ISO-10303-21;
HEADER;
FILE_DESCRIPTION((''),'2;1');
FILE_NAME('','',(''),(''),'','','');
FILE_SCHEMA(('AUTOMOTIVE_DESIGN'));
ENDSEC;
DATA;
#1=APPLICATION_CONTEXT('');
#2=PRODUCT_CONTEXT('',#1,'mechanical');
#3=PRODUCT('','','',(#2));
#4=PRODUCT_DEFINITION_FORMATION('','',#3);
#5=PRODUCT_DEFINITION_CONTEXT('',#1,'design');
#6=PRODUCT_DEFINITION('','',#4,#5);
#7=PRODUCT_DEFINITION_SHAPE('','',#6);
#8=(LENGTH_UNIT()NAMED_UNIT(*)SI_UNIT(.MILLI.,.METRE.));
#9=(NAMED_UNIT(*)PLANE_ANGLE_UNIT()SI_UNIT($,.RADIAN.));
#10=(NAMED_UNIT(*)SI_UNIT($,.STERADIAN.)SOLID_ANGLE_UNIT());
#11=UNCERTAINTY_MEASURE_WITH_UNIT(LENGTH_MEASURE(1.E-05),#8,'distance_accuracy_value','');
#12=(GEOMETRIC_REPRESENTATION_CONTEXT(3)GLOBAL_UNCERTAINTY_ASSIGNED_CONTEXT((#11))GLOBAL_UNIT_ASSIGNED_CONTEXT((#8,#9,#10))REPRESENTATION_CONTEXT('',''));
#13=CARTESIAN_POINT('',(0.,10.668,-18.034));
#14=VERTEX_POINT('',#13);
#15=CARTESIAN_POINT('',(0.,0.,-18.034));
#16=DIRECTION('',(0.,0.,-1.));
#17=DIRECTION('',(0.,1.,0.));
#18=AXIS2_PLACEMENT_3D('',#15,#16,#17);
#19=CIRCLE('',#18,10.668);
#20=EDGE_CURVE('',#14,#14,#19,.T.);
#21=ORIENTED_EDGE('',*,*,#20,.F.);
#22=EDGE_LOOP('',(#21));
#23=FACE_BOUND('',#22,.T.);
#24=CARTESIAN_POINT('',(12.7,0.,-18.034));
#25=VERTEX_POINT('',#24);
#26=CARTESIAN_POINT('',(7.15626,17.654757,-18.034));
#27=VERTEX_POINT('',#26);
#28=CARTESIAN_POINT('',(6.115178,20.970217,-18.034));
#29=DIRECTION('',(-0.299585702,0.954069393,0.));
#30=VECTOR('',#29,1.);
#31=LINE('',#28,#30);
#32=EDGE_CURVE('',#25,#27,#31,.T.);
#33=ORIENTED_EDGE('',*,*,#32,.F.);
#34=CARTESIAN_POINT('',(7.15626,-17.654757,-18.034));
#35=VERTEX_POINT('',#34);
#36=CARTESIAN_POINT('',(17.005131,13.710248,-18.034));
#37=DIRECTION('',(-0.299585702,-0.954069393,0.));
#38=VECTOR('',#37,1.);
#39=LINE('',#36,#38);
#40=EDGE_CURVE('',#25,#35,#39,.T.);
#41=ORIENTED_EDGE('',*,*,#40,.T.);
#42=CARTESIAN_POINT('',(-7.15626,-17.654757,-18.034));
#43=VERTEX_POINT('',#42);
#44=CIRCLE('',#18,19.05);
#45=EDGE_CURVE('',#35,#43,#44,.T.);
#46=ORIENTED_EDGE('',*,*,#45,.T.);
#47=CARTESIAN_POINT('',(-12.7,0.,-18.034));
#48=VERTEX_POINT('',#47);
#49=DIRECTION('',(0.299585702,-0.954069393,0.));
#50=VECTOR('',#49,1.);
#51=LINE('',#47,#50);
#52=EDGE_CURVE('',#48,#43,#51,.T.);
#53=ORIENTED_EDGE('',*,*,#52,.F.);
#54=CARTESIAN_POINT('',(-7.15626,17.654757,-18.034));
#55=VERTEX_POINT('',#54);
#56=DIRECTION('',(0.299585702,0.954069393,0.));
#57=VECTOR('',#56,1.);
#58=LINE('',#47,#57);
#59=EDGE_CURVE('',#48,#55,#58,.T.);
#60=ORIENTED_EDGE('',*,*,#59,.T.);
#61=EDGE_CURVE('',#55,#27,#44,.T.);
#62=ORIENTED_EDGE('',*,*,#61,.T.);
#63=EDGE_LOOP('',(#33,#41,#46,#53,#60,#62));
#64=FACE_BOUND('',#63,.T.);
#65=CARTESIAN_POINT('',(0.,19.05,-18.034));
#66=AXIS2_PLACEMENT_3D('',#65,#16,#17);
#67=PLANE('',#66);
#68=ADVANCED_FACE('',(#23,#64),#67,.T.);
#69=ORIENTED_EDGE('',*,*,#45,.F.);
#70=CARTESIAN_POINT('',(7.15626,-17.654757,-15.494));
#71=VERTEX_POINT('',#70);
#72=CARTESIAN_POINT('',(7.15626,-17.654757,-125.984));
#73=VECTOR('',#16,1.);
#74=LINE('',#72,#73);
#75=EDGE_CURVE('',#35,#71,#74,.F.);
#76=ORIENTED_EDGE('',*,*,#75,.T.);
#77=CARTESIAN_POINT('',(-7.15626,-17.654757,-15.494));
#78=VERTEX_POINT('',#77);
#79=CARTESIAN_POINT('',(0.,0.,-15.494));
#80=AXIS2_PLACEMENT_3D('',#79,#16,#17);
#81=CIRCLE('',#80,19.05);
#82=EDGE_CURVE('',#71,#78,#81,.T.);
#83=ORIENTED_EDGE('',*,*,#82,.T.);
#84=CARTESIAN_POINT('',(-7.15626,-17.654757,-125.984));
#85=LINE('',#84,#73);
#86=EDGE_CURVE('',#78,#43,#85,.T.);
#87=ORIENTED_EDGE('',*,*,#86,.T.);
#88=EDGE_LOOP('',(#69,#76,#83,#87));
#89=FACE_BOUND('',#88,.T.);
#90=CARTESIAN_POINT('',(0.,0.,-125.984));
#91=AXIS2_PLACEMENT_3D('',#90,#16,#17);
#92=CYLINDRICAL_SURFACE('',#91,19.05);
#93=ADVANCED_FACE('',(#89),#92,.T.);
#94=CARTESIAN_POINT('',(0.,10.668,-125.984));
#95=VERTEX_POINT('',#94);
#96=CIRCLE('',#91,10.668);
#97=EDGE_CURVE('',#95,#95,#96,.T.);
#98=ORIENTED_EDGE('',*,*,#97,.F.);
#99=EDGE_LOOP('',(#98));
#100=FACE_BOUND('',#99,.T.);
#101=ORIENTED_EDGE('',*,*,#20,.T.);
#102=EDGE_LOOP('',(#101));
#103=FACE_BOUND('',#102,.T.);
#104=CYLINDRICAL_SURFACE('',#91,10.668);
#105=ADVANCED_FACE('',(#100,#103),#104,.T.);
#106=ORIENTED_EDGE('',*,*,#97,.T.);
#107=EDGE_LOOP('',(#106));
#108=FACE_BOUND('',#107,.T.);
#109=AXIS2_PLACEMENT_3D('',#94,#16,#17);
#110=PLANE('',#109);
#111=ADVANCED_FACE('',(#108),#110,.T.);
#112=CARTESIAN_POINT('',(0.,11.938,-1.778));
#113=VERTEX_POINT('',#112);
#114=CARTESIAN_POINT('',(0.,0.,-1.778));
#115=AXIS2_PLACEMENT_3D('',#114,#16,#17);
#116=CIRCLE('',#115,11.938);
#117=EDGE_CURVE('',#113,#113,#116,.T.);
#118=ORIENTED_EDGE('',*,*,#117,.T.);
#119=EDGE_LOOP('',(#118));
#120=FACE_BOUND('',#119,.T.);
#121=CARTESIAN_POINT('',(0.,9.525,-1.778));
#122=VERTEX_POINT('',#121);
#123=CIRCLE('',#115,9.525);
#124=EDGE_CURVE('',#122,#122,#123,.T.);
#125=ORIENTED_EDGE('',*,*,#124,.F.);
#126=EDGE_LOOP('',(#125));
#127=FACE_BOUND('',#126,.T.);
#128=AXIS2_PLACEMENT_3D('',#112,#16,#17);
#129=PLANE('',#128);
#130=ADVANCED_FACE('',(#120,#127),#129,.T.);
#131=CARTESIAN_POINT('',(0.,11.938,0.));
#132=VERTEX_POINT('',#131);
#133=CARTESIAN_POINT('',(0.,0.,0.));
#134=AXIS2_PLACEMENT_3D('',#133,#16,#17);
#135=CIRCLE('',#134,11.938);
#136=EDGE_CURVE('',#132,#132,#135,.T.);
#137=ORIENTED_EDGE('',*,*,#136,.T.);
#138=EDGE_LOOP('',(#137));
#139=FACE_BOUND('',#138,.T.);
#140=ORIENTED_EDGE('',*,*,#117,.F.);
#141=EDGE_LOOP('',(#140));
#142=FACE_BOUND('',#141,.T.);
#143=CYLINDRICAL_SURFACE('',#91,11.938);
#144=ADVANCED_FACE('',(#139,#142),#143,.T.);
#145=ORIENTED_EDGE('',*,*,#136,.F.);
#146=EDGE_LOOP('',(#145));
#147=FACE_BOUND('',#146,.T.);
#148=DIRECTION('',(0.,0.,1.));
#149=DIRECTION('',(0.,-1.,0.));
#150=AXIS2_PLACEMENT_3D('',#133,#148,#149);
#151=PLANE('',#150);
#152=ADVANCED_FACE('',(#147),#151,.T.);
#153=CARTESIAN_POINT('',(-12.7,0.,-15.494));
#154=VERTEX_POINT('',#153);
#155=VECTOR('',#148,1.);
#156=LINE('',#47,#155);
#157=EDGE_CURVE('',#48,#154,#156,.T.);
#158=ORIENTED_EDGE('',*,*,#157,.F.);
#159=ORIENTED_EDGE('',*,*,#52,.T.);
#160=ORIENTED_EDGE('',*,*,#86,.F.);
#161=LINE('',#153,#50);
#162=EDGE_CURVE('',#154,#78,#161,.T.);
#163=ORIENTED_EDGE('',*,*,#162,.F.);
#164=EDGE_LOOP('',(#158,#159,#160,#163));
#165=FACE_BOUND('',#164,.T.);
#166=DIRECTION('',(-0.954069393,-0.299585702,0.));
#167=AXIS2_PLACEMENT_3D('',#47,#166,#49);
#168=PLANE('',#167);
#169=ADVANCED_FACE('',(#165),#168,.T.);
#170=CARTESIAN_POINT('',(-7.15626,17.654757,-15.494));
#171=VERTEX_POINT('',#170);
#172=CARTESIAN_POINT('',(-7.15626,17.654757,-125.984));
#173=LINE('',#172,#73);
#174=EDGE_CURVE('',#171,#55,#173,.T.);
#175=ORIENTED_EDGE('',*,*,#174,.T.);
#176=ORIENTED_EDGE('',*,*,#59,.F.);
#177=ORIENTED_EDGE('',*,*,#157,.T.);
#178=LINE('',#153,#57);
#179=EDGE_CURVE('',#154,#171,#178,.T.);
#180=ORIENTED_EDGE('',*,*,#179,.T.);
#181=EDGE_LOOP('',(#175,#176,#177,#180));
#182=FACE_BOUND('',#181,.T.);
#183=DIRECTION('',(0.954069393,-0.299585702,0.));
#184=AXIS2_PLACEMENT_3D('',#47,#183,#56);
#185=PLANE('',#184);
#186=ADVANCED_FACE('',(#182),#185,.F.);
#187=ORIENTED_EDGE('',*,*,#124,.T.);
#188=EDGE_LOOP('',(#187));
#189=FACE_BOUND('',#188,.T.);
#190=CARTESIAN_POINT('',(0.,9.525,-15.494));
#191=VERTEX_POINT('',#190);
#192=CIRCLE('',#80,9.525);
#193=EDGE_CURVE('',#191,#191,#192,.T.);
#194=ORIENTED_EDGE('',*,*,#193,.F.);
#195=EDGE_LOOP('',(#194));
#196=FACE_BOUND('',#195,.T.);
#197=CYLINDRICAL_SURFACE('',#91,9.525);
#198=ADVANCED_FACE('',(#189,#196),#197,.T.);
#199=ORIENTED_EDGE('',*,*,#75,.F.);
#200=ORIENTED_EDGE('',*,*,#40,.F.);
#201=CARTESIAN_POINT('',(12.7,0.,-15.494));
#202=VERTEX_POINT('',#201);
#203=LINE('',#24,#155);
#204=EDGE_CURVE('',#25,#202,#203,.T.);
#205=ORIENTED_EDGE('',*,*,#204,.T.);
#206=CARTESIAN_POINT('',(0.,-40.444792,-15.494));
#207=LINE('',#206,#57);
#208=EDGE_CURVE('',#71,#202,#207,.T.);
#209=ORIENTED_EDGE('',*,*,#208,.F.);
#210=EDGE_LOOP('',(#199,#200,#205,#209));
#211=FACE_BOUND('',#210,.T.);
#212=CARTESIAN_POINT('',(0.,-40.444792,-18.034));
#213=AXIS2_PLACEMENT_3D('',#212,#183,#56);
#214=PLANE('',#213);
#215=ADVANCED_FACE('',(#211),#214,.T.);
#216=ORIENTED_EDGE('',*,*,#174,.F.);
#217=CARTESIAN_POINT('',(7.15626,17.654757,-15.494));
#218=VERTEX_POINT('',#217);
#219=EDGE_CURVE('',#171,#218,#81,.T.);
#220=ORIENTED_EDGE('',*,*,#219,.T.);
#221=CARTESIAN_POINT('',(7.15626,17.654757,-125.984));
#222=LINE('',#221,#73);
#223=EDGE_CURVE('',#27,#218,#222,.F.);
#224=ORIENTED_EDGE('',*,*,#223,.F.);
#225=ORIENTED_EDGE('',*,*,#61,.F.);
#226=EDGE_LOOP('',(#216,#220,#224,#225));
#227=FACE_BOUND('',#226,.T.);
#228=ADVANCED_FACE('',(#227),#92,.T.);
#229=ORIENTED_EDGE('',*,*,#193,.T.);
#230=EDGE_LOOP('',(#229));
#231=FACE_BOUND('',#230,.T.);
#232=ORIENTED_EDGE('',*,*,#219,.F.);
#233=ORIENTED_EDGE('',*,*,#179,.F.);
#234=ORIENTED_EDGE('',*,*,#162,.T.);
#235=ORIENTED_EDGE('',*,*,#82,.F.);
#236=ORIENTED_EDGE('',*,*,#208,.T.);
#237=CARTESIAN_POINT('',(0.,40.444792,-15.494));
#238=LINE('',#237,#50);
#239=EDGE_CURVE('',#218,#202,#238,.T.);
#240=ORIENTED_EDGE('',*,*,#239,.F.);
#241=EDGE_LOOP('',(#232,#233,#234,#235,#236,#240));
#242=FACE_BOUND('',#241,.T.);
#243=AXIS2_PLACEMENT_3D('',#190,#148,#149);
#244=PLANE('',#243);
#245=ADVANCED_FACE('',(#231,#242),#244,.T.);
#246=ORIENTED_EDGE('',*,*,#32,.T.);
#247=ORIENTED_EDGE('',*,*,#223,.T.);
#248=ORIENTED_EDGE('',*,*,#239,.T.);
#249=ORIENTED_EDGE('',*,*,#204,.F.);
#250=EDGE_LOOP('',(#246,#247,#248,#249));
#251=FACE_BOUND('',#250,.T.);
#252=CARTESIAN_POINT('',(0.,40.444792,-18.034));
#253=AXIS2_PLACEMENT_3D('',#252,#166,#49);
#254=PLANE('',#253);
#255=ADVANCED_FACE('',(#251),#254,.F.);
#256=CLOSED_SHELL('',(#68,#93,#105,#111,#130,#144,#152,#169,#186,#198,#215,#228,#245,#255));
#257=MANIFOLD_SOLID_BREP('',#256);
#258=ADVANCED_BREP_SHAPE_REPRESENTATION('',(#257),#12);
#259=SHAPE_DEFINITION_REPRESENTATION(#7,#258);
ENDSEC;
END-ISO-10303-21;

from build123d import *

# Parameters (mm, degrees)
CORTAR_EXTRUIR1_START = -2.54
CORTAR_EXTRUIR1_DEPTH = 2.54


# Read off the part's stored shape, not the designer's step: Cortar-Extruir1
with BuildPart() as part:
    # Croquis1 → Revolución1 (revolve)
    with BuildSketch(Plane(origin=(0, 0, 0), x_dir=(0, 0, -1), z_dir=(1, 0, 0))):
        Polygon((0, 0), (0, 11.938), (1.778, 11.938), (1.778, 9.525), (15.494, 9.525), (15.494, 19.05), (18.034, 19.05), (18.034, 10.668), (125.984, 10.668), (125.984, 0), align=None)
    revolve(axis=Axis((0, 0, -125.984), (0, 0, 1)))

    # Cortar-Extruir1 outline → Cortar-Extruir1 (cut)
    with BuildSketch(Plane.XY.offset(-15.494).offset(CORTAR_EXTRUIR1_START)):
        with BuildLine():
            Line((-7.156259894, -17.654756989), (-12.7, 0))
            Line((-12.7, 0), (-7.156259894, 17.654756989))
            ThreePointArc((-7.156259894, 17.654756989), (-19.05, 0), (-7.156259894, -17.654756989))
        make_face()
        with BuildLine():
            Line((12.7, 0), (7.156259894, -17.654756989))
            ThreePointArc((7.156259894, -17.654756989), (19.05, 0), (7.156259894, 17.654756989))
            Line((7.156259894, 17.654756989), (12.7, 0))
        make_face()
    extrude(amount=CORTAR_EXTRUIR1_DEPTH, mode=Mode.SUBTRACT)


solid = part.part
